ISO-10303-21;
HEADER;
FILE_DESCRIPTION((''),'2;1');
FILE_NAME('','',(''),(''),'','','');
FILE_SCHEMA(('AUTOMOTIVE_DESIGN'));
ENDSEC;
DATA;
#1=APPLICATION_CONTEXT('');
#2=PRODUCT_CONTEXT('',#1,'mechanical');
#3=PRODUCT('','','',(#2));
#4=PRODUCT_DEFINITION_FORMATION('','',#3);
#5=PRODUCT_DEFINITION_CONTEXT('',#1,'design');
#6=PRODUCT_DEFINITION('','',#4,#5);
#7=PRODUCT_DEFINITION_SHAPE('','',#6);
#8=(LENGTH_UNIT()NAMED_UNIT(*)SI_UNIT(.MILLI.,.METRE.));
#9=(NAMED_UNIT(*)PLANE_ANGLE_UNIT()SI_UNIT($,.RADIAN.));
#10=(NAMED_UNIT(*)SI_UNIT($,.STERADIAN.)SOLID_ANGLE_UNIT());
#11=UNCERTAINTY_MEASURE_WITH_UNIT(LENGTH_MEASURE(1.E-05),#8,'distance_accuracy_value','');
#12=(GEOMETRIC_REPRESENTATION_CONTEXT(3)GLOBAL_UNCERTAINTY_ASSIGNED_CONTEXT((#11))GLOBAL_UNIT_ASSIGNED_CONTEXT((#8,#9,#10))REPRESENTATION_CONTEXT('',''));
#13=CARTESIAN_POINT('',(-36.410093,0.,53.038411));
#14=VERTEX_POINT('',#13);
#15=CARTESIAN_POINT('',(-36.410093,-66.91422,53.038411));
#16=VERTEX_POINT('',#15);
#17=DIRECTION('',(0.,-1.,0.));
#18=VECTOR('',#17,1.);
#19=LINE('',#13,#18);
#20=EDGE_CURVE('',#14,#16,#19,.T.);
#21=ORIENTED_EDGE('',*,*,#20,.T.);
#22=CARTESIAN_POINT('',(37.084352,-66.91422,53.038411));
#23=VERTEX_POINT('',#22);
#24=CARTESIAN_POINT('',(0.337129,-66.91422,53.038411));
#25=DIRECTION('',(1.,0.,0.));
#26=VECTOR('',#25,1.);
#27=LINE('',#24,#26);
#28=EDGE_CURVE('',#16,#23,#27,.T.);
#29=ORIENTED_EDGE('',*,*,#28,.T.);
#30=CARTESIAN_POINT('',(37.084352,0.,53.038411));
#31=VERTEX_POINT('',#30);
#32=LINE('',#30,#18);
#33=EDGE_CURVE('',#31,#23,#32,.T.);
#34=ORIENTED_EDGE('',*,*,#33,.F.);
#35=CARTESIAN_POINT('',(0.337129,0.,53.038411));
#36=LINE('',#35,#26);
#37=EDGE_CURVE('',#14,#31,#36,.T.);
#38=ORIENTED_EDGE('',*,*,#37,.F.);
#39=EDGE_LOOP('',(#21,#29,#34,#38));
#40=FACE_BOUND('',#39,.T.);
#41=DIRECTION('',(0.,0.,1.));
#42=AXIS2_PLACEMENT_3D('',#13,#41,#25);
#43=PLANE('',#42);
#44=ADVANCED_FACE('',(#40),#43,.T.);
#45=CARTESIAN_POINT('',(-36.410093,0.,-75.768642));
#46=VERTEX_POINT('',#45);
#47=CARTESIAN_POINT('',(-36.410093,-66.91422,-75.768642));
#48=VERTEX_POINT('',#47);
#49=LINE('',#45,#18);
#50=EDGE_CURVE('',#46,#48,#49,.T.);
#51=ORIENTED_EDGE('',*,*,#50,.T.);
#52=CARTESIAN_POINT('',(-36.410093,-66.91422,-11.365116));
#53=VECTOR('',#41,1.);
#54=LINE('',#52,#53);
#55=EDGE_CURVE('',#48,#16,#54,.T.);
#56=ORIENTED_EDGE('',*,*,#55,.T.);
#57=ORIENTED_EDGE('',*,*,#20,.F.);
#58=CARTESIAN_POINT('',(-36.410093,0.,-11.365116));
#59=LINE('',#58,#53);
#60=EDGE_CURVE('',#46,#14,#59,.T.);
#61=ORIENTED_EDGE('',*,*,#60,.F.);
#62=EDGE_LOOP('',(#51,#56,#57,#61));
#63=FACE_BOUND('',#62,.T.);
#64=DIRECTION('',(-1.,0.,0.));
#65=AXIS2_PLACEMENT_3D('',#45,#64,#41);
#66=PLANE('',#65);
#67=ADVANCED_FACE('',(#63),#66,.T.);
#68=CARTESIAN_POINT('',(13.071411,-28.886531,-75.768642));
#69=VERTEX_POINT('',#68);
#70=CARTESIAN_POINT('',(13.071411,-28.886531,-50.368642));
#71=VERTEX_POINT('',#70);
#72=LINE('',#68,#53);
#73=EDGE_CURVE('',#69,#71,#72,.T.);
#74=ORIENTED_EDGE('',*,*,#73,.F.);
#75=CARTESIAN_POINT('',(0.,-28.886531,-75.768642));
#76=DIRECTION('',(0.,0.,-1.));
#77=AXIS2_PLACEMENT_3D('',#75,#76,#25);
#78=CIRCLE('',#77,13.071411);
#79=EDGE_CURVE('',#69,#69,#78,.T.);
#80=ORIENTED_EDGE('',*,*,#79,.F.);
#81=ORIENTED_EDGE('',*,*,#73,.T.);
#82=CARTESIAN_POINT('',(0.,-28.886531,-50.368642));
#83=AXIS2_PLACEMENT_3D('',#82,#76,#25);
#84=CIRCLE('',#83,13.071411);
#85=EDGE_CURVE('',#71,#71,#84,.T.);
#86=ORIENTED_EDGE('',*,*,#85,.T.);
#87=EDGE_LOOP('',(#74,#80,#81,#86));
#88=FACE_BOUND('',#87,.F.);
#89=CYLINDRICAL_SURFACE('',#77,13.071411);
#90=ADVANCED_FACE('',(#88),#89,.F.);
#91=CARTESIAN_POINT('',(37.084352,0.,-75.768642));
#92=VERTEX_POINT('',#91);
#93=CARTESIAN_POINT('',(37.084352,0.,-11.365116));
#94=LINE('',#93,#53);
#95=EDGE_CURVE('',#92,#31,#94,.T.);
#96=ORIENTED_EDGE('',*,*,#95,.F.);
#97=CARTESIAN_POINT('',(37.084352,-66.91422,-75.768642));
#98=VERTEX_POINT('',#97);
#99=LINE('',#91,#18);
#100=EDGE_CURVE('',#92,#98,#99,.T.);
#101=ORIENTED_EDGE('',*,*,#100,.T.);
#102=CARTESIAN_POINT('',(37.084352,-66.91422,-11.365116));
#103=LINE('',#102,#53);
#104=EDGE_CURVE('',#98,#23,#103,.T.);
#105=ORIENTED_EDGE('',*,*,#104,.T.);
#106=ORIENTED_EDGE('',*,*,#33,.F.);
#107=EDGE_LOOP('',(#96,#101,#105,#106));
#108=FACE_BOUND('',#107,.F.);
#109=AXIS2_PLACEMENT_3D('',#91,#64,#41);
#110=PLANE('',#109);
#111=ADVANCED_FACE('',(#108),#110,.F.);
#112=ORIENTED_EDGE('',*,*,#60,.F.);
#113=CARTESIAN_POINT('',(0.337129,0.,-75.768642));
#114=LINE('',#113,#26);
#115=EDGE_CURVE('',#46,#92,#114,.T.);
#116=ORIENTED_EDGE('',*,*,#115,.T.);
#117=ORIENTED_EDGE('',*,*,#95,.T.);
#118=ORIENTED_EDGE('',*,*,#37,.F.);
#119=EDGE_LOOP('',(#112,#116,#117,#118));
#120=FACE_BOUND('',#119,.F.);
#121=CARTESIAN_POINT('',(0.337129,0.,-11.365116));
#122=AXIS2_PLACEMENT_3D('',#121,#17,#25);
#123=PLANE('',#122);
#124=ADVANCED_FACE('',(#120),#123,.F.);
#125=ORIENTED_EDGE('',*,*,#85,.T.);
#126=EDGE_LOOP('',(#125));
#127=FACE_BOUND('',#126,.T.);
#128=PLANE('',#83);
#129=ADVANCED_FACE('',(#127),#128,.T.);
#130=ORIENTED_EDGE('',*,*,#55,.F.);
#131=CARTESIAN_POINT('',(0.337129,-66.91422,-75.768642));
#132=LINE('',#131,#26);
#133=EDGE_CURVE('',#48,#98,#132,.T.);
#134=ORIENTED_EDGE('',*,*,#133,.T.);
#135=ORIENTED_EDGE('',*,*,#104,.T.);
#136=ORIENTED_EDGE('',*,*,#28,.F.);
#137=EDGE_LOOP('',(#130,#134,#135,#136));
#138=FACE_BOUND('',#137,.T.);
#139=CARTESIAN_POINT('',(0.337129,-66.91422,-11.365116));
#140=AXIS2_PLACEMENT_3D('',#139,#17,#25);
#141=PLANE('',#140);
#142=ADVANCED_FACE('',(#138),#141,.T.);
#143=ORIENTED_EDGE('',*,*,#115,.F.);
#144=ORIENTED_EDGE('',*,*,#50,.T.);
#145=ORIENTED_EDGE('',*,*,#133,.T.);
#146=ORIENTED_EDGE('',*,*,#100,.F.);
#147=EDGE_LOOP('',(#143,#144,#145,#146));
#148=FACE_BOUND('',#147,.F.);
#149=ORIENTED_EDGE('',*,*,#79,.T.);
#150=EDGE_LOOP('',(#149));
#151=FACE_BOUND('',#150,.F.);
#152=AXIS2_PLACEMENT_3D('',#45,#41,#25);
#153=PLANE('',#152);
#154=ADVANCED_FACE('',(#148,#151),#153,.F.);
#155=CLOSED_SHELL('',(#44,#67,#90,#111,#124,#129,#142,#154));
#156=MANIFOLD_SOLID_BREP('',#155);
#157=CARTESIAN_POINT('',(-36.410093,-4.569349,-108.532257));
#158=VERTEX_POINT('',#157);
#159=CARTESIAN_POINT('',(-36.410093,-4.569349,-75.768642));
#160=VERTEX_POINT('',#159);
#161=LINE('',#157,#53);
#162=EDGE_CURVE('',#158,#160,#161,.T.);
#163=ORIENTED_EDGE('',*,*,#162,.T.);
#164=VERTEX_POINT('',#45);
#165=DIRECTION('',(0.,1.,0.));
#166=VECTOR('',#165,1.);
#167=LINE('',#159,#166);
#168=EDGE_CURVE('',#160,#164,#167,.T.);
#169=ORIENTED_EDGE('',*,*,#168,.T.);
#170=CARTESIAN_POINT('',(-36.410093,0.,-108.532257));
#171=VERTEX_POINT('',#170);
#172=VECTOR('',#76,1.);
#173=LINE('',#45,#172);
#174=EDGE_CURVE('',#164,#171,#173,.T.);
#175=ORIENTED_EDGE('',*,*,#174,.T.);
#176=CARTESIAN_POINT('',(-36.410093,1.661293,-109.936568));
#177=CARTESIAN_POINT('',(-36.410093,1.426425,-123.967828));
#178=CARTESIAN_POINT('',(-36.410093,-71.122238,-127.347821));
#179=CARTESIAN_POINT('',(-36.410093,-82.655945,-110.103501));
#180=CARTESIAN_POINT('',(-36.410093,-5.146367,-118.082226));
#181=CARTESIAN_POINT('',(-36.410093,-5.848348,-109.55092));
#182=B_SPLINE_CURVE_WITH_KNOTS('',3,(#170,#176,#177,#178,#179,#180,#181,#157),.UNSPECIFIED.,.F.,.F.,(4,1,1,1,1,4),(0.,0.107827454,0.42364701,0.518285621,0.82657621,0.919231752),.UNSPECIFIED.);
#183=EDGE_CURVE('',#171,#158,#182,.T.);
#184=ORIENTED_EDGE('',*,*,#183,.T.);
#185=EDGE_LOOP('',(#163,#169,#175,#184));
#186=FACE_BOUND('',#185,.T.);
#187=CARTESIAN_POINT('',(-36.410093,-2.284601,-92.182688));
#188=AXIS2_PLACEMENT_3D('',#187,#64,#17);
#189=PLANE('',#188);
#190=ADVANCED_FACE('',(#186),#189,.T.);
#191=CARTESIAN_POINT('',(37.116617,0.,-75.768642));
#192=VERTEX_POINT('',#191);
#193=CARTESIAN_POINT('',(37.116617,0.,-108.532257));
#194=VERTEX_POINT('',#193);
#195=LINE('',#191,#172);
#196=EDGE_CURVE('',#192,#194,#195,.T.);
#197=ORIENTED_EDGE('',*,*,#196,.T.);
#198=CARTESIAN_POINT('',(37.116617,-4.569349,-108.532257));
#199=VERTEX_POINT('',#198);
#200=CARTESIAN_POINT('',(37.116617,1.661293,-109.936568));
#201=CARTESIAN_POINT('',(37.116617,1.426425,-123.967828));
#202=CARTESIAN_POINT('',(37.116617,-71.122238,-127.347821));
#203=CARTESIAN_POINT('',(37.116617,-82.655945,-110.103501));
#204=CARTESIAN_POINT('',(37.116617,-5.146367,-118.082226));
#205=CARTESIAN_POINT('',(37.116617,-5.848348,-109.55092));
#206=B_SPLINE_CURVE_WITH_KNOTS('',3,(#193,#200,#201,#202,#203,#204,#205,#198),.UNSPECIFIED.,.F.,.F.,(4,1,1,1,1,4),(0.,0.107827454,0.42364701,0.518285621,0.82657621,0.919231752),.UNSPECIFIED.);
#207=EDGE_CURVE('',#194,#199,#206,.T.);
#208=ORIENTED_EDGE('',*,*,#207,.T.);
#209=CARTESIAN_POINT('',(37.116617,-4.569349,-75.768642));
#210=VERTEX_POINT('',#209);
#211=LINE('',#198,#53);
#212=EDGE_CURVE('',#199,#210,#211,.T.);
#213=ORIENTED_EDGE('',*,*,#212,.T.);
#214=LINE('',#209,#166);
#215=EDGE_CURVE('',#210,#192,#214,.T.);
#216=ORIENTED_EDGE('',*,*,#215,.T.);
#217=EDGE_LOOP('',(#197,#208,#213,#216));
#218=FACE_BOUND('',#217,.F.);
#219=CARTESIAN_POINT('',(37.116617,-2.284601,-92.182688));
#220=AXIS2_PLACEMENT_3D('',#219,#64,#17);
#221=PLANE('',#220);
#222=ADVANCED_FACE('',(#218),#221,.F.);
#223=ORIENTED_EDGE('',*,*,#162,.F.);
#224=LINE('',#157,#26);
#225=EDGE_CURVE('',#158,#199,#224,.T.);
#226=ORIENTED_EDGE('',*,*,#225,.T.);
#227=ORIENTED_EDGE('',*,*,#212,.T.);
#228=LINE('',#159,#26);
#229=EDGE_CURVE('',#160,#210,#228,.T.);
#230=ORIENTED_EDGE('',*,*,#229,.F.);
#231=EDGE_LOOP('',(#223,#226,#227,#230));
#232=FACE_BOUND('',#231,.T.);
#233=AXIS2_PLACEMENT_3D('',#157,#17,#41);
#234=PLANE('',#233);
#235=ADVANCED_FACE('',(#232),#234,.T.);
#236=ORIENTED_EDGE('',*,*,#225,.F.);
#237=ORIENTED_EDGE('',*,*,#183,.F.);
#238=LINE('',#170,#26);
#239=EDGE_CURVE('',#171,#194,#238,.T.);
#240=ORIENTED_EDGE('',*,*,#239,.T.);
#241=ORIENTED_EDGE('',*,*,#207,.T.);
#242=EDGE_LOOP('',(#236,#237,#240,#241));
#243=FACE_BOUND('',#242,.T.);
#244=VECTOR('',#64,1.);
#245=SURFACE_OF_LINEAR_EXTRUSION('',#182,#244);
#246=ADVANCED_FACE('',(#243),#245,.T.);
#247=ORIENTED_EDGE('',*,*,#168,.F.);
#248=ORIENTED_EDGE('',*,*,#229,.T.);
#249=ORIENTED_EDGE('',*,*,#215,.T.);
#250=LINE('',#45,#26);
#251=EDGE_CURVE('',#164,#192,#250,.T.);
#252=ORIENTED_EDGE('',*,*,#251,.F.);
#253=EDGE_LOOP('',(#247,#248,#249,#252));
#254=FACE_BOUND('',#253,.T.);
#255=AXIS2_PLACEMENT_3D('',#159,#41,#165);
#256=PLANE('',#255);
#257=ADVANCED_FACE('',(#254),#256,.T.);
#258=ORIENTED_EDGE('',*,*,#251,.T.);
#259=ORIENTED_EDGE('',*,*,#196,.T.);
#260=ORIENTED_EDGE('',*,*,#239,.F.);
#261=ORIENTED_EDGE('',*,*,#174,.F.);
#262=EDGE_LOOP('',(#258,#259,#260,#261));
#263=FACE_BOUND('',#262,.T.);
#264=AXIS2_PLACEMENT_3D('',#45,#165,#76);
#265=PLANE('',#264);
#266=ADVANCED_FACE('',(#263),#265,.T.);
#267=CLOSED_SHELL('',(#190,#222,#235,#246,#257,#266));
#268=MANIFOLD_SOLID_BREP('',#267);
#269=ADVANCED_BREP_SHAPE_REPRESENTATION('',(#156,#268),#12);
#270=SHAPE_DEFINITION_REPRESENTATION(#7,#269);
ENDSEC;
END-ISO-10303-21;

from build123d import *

# Parameters (mm, degrees)
F0_W     = 73.4944455326
F0_H     = 128.8070529699
F1_DEPTH = 66.91422
F3_DEPTH = 73.52671
F4_R     = 13.0714114786
F5_DEPTH = 25.4


with BuildPart() as f1:
    # F0 (on Front) → F1 (new body)
    with BuildSketch(Plane.XZ):
        with Locations((0.3371294588, -11.3651156425)):
            Rectangle(F0_W, F0_H)
    extrude(amount=F1_DEPTH)

    # F4 (on face) → F5 (cut)
    with BuildSketch(Plane(origin=(0, 0, -75.7686421275), x_dir=(1, 0, 0), z_dir=(0, 0, -1))):
        with Locations((0, 28.8865305483)):
            Circle(F4_R)
    extrude(amount=-F5_DEPTH, mode=Mode.SUBTRACT)


with BuildPart() as f3:
    # F2 (on face) → F3 (new body)
    with BuildSketch(Plane(origin=(-36.4100933075, 0, 0), x_dir=(0, -1, 0), z_dir=(-1, 0, 0))):
        with BuildLine():
            Line((4.5693493448, -75.7686421275), (0, -75.7686421275))
            Line((0, -75.7686421275), (0, -108.5322573781))
            add(Edge.make_bspline(
                [(4.5693493448, -108.5322573781), (3.4544405111, -107.6442845671), (1.2443930447, -107.4803571585), (0, -108.5322573781)],
                knots=[0.9192317518, 0.9192317518, 0.9192317518, 0.9192317518, 1, 1, 1, 1], degree=3))
            Line((4.5693493448, -108.5322573781), (4.5693493448, -75.7686421275))
        make_face()
        with BuildLine():
            add(Edge.make_bspline(
                [(4.5693493448, -108.5322573781), (3.4544405111, -107.6442845671), (1.2443930447, -107.4803571585), (0, -108.5322573781)],
                knots=[0.9192317518, 0.9192317518, 0.9192317518, 0.9192317518, 1, 1, 1, 1], degree=3))
            add(Edge.make_bspline(
                [(0, -108.5322573781), (-1.6612931093, -109.9365681736), (-1.4264246437, -123.9678277985), (71.1222384867, -127.3478206349), (82.6559450921, -110.1035008934), (5.1463672701, -118.0822262935), (5.8483480225, -109.5509200855), (4.5693493448, -108.5322573781)],
                knots=[0, 0, 0, 0, 0.1078274543, 0.4236470104, 0.5182856205, 0.8265762096, 0.9192317518, 0.9192317518, 0.9192317518, 0.9192317518], degree=3))
        make_face()
    extrude(amount=-F3_DEPTH)


solid = Compound([f1.part, f3.part])
